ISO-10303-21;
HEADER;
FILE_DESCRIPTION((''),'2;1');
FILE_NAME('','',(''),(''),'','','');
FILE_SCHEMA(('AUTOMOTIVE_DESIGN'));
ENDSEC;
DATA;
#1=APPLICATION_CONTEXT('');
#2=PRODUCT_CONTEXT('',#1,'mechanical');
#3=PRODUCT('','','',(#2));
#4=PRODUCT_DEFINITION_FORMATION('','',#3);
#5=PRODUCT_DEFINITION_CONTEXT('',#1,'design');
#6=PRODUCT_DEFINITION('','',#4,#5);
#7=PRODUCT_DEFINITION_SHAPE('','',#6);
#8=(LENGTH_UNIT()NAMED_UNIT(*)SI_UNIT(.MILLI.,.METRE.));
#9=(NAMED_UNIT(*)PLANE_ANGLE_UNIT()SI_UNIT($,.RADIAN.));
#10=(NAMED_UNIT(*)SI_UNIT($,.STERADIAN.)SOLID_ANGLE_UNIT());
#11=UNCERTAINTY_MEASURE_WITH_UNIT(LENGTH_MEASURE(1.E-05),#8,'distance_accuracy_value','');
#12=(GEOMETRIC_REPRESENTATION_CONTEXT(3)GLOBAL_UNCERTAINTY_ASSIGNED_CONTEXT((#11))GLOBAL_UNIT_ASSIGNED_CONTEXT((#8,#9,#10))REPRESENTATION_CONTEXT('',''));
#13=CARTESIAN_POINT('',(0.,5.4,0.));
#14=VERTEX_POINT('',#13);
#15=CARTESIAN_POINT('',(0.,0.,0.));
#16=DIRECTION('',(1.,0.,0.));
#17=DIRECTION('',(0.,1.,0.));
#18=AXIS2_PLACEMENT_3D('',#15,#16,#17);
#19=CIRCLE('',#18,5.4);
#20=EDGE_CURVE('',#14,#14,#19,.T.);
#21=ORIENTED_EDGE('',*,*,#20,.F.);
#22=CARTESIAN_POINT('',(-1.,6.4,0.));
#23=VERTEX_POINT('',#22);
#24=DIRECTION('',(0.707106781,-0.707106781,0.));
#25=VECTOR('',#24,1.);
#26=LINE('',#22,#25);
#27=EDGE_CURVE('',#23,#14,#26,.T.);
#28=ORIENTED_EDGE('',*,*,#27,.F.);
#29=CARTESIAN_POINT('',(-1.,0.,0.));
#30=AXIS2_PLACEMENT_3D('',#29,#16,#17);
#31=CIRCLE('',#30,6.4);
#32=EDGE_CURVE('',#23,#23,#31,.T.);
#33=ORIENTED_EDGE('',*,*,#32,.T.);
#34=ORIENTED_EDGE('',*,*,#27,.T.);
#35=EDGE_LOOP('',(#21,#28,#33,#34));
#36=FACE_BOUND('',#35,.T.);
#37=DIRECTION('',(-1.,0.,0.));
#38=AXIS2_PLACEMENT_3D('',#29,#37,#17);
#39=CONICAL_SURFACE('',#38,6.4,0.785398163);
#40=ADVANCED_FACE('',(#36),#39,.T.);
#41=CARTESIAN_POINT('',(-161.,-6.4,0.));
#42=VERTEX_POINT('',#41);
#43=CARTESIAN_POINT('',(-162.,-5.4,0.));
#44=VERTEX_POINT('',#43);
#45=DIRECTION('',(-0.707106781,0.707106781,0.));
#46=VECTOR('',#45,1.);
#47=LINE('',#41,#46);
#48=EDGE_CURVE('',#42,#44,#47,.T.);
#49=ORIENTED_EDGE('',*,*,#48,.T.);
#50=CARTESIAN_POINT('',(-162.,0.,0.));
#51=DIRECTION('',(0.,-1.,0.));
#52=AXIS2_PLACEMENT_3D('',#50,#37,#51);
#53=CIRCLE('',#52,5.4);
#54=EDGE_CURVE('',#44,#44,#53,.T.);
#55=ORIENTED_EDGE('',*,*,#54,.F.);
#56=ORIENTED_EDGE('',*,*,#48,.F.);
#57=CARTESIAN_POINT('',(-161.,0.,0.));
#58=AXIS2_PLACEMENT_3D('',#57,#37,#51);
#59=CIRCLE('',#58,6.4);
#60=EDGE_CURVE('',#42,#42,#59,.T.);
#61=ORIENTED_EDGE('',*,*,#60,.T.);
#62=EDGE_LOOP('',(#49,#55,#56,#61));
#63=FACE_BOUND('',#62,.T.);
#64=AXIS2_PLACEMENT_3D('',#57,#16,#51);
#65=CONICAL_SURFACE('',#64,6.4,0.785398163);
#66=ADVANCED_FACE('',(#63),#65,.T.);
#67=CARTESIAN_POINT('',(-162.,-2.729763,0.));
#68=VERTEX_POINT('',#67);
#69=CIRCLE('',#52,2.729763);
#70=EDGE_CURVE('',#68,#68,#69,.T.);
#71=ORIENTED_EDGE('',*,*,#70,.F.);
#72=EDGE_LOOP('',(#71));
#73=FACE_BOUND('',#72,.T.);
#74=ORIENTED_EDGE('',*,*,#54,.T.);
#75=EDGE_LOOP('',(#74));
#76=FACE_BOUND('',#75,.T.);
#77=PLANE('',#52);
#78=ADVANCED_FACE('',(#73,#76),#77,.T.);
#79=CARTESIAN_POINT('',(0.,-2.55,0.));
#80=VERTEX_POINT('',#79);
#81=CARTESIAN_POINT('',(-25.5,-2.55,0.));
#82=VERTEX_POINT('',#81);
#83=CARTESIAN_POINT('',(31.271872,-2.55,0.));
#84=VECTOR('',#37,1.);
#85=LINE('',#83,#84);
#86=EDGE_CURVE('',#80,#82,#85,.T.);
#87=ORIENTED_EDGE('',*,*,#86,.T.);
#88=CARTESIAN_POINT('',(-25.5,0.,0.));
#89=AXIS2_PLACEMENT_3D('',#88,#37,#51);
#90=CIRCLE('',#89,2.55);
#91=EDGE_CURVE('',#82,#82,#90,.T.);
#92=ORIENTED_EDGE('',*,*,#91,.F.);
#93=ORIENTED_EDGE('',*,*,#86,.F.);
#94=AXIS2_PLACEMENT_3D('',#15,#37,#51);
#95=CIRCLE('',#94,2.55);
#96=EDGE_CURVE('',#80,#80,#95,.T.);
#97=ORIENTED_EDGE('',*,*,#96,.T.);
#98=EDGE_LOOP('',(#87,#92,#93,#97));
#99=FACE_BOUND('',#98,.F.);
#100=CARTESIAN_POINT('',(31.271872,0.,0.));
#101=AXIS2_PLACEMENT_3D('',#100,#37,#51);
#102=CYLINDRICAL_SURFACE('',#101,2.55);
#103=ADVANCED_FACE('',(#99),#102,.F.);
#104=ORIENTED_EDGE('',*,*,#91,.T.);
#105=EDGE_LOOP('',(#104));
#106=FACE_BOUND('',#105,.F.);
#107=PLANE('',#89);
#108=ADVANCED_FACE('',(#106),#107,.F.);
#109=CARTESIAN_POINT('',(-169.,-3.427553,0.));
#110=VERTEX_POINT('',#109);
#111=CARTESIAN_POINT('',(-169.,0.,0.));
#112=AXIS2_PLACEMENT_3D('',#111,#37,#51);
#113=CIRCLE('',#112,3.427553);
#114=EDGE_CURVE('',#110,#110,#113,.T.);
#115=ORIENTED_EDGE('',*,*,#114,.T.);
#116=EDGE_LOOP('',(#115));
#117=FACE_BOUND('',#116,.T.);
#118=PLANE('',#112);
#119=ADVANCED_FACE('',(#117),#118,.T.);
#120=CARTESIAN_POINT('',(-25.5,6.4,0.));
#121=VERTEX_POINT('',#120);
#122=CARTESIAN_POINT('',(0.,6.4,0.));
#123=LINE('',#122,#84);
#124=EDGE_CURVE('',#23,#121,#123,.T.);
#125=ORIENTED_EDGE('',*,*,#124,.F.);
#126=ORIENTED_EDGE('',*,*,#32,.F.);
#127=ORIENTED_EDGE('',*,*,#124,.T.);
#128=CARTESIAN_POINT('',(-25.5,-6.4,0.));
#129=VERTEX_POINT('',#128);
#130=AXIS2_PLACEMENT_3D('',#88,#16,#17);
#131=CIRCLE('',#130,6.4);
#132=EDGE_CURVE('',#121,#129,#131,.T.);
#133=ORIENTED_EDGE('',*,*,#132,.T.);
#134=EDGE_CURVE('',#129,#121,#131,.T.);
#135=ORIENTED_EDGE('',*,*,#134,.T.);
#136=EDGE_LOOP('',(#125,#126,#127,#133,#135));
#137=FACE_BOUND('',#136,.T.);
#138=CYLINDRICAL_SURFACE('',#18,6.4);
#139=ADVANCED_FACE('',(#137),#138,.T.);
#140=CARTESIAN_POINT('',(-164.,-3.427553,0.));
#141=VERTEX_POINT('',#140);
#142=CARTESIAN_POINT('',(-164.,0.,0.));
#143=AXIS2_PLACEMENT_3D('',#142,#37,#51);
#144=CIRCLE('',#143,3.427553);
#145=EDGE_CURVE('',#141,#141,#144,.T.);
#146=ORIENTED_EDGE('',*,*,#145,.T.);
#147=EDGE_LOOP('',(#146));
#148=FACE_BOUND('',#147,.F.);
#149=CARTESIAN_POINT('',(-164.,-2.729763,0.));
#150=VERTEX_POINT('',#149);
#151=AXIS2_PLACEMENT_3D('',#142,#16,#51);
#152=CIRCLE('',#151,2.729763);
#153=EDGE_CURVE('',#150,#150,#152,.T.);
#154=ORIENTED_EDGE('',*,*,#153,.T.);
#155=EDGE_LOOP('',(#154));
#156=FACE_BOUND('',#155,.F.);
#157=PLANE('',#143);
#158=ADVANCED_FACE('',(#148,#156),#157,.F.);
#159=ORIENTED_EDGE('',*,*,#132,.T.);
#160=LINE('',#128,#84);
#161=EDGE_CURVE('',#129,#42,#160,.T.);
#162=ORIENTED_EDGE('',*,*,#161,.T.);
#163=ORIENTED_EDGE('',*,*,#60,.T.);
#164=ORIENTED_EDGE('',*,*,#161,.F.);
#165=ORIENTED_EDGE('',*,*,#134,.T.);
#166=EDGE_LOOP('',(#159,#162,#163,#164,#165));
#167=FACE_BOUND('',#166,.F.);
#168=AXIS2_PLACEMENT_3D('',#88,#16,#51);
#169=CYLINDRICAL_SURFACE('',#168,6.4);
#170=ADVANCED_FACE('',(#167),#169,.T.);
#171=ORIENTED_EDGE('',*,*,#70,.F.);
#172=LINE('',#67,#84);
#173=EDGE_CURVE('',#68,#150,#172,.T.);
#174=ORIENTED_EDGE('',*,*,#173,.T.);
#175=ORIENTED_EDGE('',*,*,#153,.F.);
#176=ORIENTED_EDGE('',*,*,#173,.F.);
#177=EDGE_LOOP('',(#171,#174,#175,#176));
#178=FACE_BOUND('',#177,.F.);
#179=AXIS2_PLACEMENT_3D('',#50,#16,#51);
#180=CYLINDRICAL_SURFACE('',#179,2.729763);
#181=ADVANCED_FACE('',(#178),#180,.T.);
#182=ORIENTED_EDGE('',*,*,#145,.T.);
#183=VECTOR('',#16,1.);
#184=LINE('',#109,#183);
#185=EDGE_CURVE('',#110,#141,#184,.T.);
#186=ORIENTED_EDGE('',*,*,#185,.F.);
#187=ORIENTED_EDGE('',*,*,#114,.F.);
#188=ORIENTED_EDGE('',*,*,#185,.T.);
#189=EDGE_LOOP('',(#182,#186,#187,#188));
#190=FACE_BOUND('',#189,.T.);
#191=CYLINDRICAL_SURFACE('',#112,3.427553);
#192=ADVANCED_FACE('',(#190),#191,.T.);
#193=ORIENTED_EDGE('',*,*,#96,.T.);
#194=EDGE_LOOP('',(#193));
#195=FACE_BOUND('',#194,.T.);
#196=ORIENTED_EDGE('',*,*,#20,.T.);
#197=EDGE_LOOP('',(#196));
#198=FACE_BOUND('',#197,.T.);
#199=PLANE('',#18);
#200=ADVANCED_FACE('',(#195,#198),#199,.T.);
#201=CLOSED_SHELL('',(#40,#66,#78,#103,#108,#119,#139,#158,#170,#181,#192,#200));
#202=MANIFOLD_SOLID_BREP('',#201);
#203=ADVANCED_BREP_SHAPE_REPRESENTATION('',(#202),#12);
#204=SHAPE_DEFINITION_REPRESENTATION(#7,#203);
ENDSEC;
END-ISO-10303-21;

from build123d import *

# Parameters (mm, degrees)
F0_R      = 6.4
F1_DEPTH  = 25.5
F3_D      = 5.1
F4_R      = 6.4
F4_R_2    = 2.55
F5_DEPTH  = 136.5
F6_SIZE2  = 1
F6_SIZE   = 1
F7_R      = 2.7297634072
F8_DEPTH  = 7
F9_R      = 3.4275534108
F10_DEPTH = 5


with BuildPart() as f1:
    # F0 (on Right) → F1 (new body)
    with BuildSketch(Plane.YZ):
        Circle(F0_R)
    extrude(amount=-F1_DEPTH)

    # F3 (through all)
    with Locations(Plane.YZ):
        with Locations((0, 0)):
            Hole(F3_D / 2)

    # F4 (on face) → F5 (join)
    with BuildSketch(Plane(origin=(-25.5, 0, 0), x_dir=(0, -1, 0), z_dir=(-1, 0, 0))):
        Circle(F4_R)
        Circle(F4_R_2, mode=Mode.SUBTRACT)
        Circle(F4_R_2)
    extrude(amount=F5_DEPTH)

    # F6
    f6_edges = [f1.edges().sort_by_distance(p)[0] for p in [
        (0, -6.4, 0),
        (-12.75, 6.4, 0),
        (-25.5, 0, -6.4),
        (-25.5, 0, 6.4),
        (-93.75, -6.4, 0),
        (-162, 6.4, 0),
    ]]
    chamfer(f6_edges, length=F6_SIZE, length2=F6_SIZE2)

    # F7 (on face) → F8 (join)
    with BuildSketch(Plane(origin=(-162, 0, 0), x_dir=(0, -1, 0), z_dir=(-1, 0, 0))):
        Circle(F7_R)
    extrude(amount=F8_DEPTH)

    # F9 (on face) → F10 (join)
    with BuildSketch(Plane(origin=(-169, 0, 0), x_dir=(0, -1, 0), z_dir=(-1, 0, 0))):
        Circle(F9_R)
    extrude(amount=-F10_DEPTH)


solid = f1.part
